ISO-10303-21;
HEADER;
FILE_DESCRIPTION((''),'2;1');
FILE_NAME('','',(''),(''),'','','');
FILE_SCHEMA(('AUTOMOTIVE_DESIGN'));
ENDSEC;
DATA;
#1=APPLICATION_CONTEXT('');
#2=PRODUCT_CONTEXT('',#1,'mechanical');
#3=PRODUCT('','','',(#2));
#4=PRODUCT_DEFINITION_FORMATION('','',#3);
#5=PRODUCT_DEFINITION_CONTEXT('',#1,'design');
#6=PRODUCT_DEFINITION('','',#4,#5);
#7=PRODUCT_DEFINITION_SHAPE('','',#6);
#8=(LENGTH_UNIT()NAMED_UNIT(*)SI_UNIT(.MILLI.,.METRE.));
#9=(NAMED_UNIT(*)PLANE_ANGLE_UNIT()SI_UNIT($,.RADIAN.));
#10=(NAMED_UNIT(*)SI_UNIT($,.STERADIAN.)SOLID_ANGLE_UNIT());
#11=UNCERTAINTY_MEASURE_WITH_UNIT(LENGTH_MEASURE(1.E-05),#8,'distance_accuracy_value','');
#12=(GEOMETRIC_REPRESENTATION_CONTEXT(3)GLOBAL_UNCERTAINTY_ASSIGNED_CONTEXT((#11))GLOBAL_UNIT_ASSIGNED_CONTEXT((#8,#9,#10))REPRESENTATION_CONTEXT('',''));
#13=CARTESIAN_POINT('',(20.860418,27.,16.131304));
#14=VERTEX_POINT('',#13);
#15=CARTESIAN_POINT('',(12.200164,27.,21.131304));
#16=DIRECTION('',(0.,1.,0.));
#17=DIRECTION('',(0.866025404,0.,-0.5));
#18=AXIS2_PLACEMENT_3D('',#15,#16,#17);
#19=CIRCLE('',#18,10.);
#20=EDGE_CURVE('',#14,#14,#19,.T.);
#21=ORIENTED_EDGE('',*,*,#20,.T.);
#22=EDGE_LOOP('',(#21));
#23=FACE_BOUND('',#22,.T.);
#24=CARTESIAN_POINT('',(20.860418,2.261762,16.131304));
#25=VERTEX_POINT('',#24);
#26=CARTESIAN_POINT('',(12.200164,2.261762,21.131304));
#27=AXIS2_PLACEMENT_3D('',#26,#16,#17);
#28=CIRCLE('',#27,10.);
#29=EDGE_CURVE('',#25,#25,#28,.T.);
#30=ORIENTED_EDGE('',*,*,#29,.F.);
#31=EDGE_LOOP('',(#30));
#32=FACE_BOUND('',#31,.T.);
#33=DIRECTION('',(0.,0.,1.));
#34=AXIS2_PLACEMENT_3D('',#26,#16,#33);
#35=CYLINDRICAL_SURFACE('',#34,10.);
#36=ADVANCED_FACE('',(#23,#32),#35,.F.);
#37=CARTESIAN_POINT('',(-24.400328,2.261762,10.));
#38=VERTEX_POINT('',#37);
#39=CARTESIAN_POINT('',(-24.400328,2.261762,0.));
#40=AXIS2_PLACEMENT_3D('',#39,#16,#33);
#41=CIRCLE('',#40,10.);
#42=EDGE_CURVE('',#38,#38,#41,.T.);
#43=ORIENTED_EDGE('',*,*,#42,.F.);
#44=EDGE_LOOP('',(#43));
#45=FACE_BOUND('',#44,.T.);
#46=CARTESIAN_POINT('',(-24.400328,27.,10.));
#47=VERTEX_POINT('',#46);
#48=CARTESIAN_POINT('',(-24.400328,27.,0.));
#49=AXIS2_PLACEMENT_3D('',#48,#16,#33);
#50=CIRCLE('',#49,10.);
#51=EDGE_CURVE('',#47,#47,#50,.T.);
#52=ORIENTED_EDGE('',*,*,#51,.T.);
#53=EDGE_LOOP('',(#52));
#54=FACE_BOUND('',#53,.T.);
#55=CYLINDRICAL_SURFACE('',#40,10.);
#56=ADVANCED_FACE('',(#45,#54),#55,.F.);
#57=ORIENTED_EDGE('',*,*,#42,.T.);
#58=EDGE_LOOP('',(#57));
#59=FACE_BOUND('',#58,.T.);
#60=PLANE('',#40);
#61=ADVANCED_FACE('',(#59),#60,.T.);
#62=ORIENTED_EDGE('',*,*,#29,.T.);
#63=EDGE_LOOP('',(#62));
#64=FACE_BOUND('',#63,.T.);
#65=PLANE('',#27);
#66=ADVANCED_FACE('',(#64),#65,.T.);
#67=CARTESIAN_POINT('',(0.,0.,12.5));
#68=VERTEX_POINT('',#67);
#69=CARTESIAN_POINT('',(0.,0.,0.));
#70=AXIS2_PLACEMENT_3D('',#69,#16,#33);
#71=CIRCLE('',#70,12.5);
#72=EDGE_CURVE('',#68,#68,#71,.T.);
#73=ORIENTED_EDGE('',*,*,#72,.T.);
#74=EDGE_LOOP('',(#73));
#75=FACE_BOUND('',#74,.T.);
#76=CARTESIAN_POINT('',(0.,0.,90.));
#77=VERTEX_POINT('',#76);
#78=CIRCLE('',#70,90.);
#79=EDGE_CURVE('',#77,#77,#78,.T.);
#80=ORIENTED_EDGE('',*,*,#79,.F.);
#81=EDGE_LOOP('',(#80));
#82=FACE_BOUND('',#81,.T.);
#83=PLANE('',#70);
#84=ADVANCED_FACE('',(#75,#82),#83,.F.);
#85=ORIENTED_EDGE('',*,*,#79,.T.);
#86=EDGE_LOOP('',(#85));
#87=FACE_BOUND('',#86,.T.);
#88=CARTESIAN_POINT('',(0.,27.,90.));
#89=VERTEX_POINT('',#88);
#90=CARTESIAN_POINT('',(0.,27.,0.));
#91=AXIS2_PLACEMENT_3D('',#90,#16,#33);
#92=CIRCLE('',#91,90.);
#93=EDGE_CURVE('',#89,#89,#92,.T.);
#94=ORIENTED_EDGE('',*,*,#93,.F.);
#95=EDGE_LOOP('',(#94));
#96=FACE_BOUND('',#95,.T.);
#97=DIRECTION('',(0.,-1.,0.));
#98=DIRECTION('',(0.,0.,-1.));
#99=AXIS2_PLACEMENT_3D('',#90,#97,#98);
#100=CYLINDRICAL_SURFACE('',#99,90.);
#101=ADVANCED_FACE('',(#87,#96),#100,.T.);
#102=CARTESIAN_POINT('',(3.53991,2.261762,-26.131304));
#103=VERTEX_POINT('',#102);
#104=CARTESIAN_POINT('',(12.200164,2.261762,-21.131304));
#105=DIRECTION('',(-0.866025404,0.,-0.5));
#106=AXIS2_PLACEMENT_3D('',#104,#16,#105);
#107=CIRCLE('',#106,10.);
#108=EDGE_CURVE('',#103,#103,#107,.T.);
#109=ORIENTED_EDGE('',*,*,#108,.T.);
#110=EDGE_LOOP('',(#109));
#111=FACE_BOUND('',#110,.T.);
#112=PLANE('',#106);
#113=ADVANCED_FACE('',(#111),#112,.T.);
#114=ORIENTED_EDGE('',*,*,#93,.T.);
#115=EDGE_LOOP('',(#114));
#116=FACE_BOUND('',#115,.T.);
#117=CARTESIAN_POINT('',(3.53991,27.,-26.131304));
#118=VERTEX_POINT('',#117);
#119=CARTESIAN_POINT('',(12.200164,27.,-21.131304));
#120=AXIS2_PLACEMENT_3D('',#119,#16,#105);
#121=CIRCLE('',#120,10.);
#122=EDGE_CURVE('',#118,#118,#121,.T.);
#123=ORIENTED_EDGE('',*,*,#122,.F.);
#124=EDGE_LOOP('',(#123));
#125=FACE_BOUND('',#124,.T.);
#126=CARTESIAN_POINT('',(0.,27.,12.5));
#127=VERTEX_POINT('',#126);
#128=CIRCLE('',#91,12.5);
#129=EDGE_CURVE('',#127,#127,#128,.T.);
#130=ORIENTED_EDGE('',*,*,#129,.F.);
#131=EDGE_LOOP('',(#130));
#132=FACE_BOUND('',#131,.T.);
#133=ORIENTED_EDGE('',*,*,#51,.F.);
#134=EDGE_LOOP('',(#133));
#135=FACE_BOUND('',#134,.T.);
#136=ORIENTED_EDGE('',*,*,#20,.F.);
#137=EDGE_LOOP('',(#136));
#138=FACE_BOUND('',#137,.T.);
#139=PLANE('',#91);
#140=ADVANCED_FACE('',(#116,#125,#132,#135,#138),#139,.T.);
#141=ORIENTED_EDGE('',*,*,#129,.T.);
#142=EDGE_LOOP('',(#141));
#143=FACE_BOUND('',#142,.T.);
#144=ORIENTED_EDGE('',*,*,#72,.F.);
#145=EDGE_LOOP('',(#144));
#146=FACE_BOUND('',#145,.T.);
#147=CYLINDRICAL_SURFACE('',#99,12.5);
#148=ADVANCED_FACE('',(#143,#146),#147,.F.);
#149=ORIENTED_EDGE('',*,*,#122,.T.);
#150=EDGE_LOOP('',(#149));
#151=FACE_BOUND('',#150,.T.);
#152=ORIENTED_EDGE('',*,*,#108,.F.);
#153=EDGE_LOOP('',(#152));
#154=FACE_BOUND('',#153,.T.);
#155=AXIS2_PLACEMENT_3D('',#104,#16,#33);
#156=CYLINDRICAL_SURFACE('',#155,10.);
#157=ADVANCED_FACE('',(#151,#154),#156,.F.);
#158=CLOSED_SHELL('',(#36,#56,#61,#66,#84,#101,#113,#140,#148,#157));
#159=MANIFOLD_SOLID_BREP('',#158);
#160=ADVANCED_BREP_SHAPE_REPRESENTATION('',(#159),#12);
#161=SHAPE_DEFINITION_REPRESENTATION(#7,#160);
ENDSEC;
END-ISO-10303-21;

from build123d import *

# Parameters (mm, degrees)
SKETCH1_R           = 90
BOSS_EXTRUDE1_DEPTH = 27
SKETCH2_R           = 12.5
CUT_EXTRUDE1_DEPTH  = 131.111490653
SKETCH3_R           = 10
CUT_EXTRUDE2_DEPTH  = 24.738238351
CIRPATTERN1_COUNT   = 3


with BuildPart() as part:
    # Sketch1 → Boss-Extrude1 (new body)
    with BuildSketch(Plane(origin=(0, 0, 0), x_dir=(1, 0, 0), z_dir=(0, 1, 0))):
        Circle(SKETCH1_R)
    extrude(amount=BOSS_EXTRUDE1_DEPTH)

    # Sketch2 → Cut-Extrude1 (cut, through all)
    with BuildSketch(Plane(origin=(0, 0, 0), x_dir=(1, 0, 0), z_dir=(0, 1, 0))):
        Circle(SKETCH2_R)
    extrude(amount=CUT_EXTRUDE1_DEPTH, mode=Mode.SUBTRACT)

    # Sketch3 → Cut-Extrude2 (cut)
    with BuildSketch(Plane(origin=(0, 27, 0), x_dir=(1, 0, 0), z_dir=(0, 1, 0))):
        with Locations((-24.400327763, 0)):
            Circle(SKETCH3_R)
    cut_extrude2 = extrude(amount=-CUT_EXTRUDE2_DEPTH, mode=Mode.SUBTRACT)

    # CirPattern1: Cut-Extrude2 ×3 about axis
    cirpattern1_axis = Axis((0, 0, 0), (0, 1, 0))
    for i in range(1, CIRPATTERN1_COUNT):
        add(cut_extrude2.rotate(cirpattern1_axis, i * 360 / CIRPATTERN1_COUNT), mode=Mode.SUBTRACT)


solid = part.part
